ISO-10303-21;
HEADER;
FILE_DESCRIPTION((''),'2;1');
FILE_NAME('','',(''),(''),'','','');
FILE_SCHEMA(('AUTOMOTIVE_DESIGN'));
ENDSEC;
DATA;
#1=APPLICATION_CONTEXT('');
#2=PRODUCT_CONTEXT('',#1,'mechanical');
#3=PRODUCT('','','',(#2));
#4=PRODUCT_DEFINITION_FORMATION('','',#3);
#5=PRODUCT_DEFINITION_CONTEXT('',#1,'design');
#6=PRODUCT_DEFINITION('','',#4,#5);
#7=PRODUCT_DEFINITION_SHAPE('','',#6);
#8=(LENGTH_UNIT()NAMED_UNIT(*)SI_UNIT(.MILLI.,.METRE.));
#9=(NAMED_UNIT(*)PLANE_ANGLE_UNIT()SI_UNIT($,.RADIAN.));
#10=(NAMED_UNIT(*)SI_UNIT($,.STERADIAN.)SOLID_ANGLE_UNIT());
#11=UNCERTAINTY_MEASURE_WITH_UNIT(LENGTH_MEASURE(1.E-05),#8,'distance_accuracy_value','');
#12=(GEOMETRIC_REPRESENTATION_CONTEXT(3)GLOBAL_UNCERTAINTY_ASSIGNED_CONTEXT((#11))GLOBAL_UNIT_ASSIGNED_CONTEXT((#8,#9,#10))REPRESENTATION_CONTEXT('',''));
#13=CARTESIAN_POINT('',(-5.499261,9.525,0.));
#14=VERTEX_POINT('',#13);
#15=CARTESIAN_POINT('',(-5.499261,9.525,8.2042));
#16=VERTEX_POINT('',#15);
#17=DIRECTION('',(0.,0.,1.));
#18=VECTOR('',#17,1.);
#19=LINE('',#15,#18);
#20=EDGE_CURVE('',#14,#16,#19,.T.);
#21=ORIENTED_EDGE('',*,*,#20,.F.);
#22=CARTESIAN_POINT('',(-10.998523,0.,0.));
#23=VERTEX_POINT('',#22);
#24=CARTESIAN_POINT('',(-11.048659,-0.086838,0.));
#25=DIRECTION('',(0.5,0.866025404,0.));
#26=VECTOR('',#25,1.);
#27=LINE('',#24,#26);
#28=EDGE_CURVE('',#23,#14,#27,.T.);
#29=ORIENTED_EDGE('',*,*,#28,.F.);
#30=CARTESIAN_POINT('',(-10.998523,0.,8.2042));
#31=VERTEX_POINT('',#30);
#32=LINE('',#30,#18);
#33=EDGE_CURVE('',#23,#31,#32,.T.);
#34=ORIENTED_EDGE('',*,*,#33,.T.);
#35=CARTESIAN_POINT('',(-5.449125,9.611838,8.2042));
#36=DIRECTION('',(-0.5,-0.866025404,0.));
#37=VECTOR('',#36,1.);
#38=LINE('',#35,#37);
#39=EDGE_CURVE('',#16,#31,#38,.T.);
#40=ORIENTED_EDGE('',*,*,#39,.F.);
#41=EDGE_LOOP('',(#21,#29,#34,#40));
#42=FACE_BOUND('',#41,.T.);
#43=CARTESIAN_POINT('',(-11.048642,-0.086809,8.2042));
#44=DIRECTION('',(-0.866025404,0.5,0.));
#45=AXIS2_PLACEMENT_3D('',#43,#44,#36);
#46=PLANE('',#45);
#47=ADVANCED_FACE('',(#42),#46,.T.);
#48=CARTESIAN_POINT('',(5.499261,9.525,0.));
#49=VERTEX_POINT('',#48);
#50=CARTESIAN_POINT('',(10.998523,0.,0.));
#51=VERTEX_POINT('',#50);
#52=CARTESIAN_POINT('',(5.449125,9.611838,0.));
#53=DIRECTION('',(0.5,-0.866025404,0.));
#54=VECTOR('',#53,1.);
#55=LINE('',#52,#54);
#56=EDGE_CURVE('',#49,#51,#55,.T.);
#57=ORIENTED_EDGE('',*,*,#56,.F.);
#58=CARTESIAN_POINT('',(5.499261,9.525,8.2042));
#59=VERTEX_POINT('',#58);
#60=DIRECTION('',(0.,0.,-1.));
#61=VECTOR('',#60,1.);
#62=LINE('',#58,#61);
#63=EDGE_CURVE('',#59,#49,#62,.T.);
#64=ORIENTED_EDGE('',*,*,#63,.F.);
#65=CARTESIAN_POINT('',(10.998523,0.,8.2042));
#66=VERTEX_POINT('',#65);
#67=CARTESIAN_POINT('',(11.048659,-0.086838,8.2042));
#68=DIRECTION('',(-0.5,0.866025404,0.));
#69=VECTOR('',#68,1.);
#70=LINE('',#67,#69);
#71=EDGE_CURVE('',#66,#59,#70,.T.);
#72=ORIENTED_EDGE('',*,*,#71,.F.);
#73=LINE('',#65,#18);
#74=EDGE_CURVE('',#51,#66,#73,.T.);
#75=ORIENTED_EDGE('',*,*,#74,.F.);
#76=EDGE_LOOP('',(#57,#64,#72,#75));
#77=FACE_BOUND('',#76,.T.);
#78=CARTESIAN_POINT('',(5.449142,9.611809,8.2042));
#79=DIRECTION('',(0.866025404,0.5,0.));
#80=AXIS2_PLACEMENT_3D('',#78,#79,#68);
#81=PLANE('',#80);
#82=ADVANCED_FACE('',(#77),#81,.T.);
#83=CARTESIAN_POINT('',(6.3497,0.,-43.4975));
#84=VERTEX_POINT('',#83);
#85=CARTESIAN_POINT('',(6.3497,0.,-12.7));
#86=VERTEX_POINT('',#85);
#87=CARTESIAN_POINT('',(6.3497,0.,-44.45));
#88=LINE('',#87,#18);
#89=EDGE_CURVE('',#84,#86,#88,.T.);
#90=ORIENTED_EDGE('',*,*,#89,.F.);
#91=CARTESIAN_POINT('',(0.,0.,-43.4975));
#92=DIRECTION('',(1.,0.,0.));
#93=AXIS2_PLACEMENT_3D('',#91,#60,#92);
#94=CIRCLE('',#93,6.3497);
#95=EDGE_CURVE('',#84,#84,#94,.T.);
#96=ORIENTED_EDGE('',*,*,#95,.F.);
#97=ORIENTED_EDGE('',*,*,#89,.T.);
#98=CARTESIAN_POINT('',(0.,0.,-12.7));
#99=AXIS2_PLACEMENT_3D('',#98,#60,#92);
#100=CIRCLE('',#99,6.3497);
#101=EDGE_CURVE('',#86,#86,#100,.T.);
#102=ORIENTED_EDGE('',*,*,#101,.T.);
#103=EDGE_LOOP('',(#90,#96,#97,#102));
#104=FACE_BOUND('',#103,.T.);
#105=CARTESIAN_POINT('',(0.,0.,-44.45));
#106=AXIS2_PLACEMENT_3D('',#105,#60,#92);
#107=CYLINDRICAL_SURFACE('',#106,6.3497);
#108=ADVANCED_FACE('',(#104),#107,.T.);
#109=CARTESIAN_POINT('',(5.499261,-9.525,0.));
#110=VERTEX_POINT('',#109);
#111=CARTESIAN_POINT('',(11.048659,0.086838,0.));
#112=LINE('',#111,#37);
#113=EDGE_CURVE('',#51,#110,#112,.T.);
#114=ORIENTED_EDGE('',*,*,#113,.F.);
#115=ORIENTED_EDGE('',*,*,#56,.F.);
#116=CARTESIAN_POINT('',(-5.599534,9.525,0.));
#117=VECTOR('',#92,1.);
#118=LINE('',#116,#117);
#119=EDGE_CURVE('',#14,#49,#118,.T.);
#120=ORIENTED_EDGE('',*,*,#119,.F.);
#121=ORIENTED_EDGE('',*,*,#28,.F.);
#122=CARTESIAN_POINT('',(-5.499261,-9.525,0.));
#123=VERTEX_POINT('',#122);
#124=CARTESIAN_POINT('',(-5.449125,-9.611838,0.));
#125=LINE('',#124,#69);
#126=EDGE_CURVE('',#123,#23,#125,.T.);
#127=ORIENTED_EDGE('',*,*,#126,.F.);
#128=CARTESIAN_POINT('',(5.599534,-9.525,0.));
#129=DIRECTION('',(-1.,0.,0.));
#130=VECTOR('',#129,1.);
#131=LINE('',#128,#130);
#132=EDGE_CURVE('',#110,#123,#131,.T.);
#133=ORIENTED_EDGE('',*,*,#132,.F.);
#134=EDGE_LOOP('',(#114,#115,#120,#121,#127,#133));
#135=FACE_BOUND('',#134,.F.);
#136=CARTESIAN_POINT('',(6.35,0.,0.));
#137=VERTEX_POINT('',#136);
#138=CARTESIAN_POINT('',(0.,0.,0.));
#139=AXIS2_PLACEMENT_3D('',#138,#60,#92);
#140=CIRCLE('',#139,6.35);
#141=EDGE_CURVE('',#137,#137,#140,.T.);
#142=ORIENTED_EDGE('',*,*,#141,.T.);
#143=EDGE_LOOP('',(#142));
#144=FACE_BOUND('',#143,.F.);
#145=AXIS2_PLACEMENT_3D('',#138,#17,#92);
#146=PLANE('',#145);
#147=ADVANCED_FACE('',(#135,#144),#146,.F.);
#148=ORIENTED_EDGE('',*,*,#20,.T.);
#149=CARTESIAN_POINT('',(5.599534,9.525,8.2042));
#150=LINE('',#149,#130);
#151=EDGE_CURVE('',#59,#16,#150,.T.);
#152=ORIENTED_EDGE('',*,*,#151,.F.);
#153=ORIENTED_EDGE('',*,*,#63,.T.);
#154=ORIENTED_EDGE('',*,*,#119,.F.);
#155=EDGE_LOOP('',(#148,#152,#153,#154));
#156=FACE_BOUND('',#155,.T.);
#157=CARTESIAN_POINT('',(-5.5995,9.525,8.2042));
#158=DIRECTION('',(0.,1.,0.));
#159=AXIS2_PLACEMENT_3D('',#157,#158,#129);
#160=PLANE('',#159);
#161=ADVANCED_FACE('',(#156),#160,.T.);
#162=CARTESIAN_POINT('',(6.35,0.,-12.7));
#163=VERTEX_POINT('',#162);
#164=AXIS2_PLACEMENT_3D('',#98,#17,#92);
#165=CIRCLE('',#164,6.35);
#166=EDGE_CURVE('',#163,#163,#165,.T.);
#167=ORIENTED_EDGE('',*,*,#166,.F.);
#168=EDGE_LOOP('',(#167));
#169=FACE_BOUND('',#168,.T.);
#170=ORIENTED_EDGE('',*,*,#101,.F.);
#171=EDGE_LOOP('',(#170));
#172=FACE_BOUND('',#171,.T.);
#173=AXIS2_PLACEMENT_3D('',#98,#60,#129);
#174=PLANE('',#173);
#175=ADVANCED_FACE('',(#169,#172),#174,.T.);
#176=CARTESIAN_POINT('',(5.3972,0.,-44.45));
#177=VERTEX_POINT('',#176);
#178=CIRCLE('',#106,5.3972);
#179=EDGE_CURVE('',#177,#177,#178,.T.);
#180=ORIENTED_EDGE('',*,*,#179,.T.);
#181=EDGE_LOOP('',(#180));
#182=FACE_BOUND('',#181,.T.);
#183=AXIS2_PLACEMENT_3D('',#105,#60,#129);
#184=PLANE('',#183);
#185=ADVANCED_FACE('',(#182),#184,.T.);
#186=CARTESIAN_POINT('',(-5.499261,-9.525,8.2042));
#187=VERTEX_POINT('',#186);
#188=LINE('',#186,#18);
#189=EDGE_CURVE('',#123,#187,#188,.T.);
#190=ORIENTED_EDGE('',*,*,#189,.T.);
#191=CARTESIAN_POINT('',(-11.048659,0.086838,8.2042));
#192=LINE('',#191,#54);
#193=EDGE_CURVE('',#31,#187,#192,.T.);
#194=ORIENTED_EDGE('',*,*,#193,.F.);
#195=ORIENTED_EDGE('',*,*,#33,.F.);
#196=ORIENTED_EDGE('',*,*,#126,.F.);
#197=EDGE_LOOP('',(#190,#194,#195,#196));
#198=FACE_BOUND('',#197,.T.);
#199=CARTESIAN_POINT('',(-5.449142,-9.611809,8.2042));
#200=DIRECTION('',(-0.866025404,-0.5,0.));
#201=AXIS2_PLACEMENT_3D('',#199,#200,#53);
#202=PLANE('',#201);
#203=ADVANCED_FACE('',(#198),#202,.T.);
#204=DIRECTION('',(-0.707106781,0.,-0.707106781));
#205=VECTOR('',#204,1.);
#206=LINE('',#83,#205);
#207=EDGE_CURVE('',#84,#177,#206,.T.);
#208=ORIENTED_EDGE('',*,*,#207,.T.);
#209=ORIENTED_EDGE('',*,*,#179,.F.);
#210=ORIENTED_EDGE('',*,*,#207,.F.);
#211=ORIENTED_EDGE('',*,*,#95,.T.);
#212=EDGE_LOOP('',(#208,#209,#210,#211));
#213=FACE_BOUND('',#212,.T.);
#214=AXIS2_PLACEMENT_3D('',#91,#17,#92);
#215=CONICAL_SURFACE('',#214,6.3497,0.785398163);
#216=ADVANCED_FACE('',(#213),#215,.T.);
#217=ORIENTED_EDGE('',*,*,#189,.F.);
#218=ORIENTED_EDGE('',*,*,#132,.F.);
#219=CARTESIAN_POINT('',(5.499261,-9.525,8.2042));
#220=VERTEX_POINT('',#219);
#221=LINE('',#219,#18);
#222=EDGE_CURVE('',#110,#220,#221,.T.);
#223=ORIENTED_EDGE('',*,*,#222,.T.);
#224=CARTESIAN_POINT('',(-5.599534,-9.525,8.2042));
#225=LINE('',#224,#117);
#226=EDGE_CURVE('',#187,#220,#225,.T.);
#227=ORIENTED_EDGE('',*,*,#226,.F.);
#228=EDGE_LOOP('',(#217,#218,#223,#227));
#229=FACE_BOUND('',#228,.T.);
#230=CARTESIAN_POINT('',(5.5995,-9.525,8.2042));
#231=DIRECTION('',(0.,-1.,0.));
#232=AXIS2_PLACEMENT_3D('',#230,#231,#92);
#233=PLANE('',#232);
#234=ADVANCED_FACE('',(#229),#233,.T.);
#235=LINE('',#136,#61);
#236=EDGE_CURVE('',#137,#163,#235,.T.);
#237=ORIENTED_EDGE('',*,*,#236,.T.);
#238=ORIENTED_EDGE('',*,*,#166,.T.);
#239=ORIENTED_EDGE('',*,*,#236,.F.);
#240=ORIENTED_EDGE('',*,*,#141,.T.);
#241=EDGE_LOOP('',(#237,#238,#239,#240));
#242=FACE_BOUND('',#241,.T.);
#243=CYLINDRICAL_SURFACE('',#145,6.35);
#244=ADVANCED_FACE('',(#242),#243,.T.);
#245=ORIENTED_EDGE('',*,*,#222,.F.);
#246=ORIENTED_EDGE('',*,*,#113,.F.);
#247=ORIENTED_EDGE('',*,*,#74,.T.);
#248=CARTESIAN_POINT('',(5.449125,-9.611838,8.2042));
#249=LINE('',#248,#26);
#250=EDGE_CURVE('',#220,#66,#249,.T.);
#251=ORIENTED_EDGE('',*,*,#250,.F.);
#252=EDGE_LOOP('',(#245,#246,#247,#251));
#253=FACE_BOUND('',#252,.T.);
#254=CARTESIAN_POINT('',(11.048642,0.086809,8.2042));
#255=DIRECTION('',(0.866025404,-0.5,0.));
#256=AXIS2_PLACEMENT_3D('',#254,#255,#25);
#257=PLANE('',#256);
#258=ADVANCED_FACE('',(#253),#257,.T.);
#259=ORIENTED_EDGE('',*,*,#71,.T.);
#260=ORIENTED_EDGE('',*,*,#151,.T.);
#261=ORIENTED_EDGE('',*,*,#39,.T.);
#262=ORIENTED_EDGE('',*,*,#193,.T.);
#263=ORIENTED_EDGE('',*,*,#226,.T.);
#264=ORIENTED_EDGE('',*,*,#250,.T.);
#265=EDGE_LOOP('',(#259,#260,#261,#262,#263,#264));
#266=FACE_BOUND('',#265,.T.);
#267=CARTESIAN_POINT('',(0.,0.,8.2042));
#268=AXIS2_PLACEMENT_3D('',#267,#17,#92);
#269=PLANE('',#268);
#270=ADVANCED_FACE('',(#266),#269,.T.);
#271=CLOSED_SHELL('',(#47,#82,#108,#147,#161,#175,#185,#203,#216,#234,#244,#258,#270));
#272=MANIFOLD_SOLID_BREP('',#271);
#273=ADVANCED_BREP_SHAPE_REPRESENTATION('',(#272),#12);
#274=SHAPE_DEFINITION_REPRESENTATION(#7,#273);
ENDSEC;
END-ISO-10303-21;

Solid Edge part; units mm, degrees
sketch "Sketch1" plane through (0, 0, 0) normal (0, 0, 1) x (1, 0, 0)
  circle A0 centre (0, 0) radius 11.049
  dimension "D1" = 22.098
extrude "Protrusion1" add sketch "Sketch1" along normal blind 8.2042
sketch "Sketch2" plane through (0, 0, 0) normal (0, 0, -1) x (1, 0, 0)
  circle A0 centre (0, 0) radius 6.35
extrude "Protrusion2" add sketch "Sketch2" along normal blind 44.45
sketch "Sketch3" plane through (0, 0, -44.45) normal (0, 0, -1) x (1, 0, 0)
  circle A0 centre (0, 0) radius 6.3497
extrude "Cutout1" cut sketch "Sketch3" against normal blind 31.75 flip side to cut
chamfer "Chamfer_1" distance 0.9525 angle 45 1 edges at (-6.3497, 0, -44.45)
sketch "Sketch4" plane through (0, 0, 8.2042) normal (0, 0, 1) x (1, 0, 0)
  line L0 (-5.5995, 9.525) -> (5.5995, 9.525)
  dimension "D1" = 19.05
extrude "Cutout2" cut sketch "Sketch4" against normal up to next material side at (0, 9.575, 8.2042)
pattern_circular "Pattern1" count 6 over 360 about axis through (0, 0, 8.2042) along (0, 0, 1) of "Cutout2"
properties part number "24100438"
